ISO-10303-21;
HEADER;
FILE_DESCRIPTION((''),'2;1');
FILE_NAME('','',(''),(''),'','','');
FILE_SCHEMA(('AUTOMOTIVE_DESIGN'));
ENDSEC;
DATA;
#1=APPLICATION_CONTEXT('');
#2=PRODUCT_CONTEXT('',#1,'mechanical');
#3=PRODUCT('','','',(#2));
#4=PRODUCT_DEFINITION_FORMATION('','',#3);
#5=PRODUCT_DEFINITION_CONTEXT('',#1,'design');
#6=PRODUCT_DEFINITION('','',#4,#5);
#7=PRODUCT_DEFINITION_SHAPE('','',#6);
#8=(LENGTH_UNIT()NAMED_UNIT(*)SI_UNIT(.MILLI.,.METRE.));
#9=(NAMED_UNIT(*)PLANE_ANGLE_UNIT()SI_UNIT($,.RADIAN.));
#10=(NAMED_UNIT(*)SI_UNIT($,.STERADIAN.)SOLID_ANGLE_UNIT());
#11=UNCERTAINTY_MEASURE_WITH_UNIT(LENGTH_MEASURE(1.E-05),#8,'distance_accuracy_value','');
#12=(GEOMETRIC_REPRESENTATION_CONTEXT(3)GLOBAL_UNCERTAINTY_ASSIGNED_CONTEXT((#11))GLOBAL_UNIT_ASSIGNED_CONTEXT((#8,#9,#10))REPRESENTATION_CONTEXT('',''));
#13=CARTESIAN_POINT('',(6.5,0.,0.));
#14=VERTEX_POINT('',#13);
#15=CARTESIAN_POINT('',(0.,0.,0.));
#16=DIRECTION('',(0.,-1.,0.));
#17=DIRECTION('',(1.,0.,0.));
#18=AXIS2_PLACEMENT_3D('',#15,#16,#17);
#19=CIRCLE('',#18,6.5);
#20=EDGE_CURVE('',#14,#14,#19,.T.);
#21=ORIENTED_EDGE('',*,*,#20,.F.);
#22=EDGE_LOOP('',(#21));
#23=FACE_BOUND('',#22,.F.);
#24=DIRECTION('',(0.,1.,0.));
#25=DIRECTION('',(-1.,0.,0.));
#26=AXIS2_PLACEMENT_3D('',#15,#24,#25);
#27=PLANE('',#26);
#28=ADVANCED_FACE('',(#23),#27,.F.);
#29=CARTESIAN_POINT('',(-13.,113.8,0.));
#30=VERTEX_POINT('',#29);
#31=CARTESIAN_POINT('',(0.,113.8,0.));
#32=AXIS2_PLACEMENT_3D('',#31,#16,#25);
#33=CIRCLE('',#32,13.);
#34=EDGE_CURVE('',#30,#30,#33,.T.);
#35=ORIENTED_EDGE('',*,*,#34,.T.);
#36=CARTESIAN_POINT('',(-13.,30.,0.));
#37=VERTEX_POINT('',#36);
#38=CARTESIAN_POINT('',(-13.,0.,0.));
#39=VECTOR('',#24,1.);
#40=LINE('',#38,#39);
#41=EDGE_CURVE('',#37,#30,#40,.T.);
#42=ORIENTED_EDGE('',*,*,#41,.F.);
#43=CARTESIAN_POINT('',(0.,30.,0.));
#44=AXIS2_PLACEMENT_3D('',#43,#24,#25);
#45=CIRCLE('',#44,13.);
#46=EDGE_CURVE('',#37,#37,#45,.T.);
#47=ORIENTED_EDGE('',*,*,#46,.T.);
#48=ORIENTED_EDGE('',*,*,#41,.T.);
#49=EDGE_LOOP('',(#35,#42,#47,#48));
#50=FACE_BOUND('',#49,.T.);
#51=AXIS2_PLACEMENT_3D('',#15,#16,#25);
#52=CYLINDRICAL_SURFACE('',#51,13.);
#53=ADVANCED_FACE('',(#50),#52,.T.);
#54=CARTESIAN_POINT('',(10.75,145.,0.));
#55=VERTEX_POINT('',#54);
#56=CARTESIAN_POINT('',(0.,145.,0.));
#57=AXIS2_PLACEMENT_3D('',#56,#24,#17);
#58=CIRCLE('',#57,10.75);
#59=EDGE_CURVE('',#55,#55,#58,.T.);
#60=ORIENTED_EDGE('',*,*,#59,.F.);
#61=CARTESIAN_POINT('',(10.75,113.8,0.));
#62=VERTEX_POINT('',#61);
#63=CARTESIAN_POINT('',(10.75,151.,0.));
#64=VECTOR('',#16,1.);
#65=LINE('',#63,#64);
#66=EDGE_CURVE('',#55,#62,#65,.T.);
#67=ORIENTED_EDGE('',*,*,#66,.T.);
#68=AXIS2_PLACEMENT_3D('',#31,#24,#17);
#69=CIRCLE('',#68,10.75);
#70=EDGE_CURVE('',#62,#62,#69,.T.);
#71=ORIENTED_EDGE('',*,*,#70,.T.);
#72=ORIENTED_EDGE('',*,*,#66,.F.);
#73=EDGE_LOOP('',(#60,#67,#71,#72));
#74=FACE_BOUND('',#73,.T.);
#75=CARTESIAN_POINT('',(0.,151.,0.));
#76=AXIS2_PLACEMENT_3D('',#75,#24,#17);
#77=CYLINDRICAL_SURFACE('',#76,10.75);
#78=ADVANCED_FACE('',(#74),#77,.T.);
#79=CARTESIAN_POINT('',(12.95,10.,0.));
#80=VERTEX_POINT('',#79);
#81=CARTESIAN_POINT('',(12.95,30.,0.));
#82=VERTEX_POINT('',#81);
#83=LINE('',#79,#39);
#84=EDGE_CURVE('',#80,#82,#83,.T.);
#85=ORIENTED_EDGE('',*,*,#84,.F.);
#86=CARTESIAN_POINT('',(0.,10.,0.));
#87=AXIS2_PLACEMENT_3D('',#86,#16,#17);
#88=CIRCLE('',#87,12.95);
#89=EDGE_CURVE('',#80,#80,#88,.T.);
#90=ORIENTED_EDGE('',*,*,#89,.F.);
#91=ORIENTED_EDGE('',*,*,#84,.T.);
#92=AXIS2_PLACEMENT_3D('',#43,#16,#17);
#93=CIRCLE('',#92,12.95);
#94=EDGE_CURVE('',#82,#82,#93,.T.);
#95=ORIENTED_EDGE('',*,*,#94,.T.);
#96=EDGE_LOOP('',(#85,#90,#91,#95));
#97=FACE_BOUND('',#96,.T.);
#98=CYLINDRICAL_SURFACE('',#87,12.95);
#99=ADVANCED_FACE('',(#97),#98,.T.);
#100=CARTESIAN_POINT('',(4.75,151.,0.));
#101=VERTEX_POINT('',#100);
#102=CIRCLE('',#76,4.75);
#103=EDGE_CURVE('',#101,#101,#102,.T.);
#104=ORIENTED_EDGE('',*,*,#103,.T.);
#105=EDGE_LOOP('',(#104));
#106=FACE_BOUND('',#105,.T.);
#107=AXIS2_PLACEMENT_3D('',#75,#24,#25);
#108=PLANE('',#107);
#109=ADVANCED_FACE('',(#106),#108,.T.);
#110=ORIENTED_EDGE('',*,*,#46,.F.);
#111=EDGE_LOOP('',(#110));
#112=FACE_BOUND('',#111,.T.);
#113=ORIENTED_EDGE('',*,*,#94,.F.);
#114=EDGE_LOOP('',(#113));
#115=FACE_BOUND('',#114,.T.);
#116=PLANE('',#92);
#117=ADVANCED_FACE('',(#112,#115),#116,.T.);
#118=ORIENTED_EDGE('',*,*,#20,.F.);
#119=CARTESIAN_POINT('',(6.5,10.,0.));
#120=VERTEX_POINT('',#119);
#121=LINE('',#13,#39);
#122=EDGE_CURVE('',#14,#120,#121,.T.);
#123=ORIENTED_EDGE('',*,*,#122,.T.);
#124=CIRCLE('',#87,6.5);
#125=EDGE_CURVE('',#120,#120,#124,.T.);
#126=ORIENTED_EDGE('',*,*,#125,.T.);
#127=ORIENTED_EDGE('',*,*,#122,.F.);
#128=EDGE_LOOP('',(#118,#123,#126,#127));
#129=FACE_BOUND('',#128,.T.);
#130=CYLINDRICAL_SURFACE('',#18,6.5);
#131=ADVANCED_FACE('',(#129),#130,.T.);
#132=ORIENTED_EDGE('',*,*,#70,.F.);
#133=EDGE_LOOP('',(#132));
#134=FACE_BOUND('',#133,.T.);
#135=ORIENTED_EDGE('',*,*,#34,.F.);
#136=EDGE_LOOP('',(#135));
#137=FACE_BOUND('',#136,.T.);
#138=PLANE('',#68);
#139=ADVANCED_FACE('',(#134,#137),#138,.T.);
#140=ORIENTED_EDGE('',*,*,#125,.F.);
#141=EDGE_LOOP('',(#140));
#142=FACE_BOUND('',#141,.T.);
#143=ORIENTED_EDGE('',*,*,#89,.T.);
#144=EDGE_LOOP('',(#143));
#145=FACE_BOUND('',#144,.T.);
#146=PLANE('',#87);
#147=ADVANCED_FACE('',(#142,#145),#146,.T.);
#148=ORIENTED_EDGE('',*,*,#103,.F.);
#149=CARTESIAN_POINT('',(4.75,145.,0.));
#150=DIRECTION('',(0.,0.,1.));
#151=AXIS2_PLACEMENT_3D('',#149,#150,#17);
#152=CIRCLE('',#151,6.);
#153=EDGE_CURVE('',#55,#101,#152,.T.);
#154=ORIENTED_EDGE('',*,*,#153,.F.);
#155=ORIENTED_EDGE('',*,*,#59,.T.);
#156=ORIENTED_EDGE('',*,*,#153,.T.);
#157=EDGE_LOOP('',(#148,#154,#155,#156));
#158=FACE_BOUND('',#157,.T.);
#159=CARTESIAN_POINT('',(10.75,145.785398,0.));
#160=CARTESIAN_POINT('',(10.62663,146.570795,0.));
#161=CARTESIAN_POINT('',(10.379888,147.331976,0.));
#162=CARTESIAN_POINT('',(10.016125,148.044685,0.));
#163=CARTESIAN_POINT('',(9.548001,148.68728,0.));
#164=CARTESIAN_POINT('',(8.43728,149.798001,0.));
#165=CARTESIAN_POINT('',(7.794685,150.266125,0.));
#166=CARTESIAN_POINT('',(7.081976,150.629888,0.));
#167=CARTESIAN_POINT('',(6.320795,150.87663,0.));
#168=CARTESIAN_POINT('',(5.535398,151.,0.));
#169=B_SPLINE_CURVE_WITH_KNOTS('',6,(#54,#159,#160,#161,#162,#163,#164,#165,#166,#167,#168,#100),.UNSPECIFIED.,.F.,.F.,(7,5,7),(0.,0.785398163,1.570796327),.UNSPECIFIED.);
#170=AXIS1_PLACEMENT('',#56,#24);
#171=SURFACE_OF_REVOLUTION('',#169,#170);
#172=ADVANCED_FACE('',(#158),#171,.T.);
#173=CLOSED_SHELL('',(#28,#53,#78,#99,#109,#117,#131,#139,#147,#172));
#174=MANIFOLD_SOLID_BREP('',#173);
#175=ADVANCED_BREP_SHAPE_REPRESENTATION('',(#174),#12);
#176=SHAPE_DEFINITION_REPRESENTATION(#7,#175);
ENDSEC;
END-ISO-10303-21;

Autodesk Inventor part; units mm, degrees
ref_plane "YZ Plane" through (0, 0, 0) normal (1, 0, 0) x (0, 1, 0)
ref_plane "XZ Plane" through (0, 0, 0) normal (0, 1, 0) x (-1, 0, 0)
ref_plane "XY Plane" through (0, 0, 0) normal (0, 0, 1) x (1, 0, 0)
sketch "Boceto1" plane through (0, 0, 0) normal (0, 1, 0) x (-1, 0, 0)
  circle A0 centre (0, 0) radius 13
  dimension "d0" = 26
extrude "Extrusión1" add sketch "Boceto1" along normal blind 151
sketch "Boceto2" plane through (0, 151, 0) normal (0, 1, 0) x (1, 0, 0)
  circle A0 centre (0, 0) radius 10.75
  circle A1 centre (0, 0) radius 13
  dimension "d3" = 21.5
extrude "Extrusión2" cut sketch "Boceto2" against normal blind 37.2
fillet "Empalme1" radius 6 1 edges at (-10.75, 151, 0)
thread "Rosca1" size "3/4" designation "3/4 - 14 NPT" standard "NPT" length 31.2 offset 25
sketch "Boceto3" plane through (0, 0, 0) normal (0, -1, 0) x (1, 0, 0)
  circle A0 centre (0, 0) radius 6.5
  circle A1 centre (0, 0) radius 13
  dimension "d9" = 13
extrude "Extrusión3" cut sketch "Boceto3" against normal blind 10
sketch "Boceto4" plane through (0, 10, 0) normal (0, -1, 0) x (1, 0, 0)
  circle A0 centre (0, 0) radius 13
  circle A1 centre (0, 0) radius 12.95
  dimension "d12" = 25.9
extrude "Extrusión4" cut sketch "Boceto4" against normal blind 20
thread "Rosca2" size "1/4" designation "1/4 - 18 NPT" standard "NPT" length 15.103
thread "Rosca3" size "1" designation "1 - 11.5 NPT" standard "NPT" length 25.006 offset 1
properties part number "W504"
